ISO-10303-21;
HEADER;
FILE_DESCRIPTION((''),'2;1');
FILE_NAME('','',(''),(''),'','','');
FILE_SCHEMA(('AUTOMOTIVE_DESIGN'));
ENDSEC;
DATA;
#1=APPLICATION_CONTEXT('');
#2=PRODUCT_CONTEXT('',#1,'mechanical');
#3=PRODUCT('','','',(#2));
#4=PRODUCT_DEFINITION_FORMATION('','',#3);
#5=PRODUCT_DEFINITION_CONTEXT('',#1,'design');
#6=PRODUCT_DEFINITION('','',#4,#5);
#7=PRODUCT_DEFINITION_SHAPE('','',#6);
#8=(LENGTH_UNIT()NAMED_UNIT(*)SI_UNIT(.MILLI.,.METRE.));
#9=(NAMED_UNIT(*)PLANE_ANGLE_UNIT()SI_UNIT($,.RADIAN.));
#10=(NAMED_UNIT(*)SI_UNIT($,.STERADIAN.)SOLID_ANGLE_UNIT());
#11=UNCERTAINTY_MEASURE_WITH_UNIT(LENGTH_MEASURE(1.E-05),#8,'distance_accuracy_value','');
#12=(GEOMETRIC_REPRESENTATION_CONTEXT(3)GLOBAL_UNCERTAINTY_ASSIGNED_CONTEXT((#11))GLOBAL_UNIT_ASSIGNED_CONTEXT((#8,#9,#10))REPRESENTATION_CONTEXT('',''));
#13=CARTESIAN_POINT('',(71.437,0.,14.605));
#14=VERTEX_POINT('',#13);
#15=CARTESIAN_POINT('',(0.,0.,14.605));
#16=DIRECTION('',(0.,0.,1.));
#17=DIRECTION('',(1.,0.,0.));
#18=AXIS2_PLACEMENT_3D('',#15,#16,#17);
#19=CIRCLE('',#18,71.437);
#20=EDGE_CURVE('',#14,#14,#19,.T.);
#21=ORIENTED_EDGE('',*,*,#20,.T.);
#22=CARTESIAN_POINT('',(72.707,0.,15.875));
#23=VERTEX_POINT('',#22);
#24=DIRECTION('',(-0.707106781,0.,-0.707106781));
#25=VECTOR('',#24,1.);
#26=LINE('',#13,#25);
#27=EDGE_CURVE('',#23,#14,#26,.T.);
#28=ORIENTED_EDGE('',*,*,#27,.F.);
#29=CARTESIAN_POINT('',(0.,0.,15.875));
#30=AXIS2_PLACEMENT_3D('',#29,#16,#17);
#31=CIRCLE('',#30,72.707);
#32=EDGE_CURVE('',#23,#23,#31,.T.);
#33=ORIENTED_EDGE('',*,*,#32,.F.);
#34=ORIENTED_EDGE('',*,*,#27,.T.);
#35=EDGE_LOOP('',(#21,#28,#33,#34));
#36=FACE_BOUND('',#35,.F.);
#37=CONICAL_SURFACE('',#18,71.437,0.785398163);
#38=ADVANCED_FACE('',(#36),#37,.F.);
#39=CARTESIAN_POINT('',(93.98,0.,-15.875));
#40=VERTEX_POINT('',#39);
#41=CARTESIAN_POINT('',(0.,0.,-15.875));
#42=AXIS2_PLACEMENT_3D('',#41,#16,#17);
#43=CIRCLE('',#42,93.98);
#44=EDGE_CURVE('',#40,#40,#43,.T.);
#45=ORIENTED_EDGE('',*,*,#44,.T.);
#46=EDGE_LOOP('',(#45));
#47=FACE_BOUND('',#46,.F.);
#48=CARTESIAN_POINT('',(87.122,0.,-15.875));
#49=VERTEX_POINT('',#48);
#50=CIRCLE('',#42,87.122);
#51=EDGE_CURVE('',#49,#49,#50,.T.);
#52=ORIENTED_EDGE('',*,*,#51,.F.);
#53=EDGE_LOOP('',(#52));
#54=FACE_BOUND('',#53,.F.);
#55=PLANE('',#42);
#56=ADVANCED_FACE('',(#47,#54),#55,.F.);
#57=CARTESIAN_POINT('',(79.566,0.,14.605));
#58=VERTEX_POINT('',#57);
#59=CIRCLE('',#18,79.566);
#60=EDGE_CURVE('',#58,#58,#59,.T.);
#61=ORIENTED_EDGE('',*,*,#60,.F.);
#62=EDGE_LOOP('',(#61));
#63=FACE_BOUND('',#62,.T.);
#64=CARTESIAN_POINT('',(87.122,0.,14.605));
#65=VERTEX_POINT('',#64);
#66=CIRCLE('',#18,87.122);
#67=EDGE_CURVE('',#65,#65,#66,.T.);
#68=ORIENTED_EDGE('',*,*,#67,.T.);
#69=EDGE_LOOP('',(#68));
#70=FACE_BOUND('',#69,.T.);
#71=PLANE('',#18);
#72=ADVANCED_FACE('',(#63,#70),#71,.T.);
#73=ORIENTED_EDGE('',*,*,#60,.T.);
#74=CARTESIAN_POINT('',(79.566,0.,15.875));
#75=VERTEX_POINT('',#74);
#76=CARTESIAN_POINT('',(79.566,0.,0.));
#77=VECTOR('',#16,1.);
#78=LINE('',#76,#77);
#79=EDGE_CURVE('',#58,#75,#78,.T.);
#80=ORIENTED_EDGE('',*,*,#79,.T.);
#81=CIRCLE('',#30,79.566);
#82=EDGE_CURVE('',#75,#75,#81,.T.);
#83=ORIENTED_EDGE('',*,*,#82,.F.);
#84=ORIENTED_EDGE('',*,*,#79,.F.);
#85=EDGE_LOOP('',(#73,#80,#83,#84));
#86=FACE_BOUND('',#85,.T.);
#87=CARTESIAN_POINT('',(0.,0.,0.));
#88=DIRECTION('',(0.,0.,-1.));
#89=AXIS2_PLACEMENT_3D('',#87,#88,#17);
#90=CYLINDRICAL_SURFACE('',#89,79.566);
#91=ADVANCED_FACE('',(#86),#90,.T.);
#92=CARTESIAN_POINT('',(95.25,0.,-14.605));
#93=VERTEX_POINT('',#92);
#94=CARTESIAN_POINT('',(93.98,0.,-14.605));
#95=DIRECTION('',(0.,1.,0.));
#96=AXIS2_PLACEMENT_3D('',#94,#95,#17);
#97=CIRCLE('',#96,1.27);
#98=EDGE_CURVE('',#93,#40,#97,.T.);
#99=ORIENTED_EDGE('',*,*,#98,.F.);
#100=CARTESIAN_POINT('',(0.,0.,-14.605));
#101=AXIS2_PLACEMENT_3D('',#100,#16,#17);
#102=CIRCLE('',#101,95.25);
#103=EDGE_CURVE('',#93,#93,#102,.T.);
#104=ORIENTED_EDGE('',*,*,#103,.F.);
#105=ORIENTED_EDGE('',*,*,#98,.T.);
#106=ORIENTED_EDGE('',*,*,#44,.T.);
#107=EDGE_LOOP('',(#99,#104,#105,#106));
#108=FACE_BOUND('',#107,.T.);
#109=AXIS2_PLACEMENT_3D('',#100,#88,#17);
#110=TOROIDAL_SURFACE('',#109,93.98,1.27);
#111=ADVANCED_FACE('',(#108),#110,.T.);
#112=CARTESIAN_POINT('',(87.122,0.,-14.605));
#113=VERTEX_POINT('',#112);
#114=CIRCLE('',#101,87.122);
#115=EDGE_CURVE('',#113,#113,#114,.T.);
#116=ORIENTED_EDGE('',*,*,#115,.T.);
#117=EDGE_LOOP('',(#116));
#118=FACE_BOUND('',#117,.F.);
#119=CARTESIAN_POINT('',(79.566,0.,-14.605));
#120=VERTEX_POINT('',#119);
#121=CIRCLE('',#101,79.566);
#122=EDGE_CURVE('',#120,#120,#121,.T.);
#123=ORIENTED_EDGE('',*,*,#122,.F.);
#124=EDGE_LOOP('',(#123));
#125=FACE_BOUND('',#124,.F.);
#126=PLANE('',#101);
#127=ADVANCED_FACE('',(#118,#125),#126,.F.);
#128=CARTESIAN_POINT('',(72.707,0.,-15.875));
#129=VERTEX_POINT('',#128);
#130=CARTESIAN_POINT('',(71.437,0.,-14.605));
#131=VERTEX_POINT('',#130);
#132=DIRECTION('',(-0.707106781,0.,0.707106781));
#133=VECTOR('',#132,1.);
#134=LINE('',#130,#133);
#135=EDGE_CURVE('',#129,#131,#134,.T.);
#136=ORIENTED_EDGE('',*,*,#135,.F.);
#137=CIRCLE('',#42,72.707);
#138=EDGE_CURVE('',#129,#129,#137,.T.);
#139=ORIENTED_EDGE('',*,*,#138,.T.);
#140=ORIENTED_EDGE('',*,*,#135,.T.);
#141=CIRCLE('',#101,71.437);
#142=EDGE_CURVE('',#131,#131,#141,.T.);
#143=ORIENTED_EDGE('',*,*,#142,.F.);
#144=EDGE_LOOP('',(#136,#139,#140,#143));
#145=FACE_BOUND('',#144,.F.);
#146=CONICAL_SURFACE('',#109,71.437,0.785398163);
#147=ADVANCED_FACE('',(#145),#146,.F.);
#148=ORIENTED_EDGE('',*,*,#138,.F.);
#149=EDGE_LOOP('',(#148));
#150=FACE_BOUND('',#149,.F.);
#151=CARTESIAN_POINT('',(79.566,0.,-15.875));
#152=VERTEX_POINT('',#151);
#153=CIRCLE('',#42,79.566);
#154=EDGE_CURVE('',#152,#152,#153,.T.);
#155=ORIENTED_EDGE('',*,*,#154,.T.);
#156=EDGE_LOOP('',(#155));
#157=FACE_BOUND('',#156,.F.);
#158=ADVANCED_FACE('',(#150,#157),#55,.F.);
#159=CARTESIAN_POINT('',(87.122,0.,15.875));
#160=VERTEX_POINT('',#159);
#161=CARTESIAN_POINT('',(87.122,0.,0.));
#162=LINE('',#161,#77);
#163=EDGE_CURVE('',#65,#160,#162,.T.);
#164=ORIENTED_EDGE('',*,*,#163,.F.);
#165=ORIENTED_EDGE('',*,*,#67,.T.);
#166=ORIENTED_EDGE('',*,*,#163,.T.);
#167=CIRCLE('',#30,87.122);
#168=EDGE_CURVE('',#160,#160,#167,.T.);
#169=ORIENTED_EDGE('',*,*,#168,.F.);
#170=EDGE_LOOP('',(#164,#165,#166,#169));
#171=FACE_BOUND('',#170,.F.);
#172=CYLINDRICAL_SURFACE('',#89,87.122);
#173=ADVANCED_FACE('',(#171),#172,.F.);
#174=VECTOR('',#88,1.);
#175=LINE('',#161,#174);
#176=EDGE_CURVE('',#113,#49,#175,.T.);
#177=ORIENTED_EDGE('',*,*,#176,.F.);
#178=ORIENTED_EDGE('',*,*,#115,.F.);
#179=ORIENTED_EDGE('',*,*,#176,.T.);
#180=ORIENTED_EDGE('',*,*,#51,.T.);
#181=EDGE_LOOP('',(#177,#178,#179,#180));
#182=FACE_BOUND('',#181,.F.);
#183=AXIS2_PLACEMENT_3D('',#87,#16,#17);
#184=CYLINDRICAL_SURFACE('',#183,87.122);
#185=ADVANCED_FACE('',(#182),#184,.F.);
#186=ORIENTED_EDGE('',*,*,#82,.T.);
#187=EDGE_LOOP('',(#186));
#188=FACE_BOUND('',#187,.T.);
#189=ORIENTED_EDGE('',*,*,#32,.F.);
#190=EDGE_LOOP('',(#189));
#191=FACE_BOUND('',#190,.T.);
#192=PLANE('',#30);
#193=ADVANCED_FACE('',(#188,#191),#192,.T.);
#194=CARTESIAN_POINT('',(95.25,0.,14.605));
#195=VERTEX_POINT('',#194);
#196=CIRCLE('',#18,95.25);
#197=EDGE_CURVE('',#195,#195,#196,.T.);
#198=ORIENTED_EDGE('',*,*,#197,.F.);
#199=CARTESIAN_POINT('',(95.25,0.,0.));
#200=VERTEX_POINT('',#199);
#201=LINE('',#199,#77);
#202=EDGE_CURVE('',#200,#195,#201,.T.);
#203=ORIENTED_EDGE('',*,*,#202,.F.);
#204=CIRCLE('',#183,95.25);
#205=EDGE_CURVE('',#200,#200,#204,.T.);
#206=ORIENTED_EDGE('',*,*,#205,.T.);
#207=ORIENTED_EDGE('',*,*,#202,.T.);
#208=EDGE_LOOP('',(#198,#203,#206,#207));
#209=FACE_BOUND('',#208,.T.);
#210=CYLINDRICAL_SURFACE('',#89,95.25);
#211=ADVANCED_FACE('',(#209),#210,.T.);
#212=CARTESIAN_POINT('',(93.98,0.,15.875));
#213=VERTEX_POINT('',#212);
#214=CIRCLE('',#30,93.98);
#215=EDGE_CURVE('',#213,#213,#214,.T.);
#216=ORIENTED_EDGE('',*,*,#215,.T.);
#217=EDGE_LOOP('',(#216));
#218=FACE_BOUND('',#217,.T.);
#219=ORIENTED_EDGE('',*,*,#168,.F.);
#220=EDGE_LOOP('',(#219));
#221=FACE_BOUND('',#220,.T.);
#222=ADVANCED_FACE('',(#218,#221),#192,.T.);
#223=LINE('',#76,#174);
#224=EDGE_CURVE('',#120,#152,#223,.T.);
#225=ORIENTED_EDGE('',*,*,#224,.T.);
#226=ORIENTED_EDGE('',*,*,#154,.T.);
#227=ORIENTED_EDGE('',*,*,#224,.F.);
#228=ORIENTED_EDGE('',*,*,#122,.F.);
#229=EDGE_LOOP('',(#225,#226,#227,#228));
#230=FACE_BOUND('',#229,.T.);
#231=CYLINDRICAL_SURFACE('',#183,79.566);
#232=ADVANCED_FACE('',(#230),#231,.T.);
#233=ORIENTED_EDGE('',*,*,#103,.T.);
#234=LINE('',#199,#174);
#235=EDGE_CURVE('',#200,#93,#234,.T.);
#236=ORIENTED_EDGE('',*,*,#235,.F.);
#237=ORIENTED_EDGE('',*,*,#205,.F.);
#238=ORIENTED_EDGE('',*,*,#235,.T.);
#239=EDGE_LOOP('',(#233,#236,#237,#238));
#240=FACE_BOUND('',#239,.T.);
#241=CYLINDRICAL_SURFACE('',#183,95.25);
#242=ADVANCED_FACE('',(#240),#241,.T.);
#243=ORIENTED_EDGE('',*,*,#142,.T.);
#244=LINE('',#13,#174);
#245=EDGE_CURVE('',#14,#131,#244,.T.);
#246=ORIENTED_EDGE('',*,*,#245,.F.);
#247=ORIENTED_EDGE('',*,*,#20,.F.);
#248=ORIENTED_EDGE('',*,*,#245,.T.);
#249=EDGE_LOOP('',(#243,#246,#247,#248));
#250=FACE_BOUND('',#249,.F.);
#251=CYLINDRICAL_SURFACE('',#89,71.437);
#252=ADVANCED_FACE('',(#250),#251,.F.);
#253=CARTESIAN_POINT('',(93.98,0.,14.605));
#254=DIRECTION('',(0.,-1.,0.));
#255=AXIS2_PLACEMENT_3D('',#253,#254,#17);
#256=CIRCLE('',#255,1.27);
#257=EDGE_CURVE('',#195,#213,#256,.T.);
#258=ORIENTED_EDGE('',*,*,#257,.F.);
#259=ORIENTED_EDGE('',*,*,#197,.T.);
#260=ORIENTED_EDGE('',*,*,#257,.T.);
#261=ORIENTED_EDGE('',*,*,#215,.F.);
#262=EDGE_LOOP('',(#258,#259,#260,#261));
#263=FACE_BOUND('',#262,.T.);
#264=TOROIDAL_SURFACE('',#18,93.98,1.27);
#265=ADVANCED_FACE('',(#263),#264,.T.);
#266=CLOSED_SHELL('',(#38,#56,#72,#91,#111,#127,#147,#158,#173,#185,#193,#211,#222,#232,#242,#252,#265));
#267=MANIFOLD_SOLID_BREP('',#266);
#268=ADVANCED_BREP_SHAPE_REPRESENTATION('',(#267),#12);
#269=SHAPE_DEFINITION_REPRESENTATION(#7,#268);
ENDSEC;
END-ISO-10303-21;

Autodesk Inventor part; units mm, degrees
ref_plane "YZ Plane" through (0, 0, 0) normal (1, 0, 0) x (0, 1, 0)
ref_plane "XZ Plane" through (0, 0, 0) normal (0, 1, 0) x (-1, 0, 0)
ref_plane "XY Plane" through (0, 0, 0) normal (0, 0, 1) x (1, 0, 0)
sketch "Sketch1" plane through (0, 0, 0) normal (0, 0, 1) x (1, 0, 0)
  circle A0 centre (0, 0) radius 7.1437
  circle A1 centre (0, 0) radius 9.525
  circle A2 centre (0, 0) radius 7.9566
  circle A3 centre (0, 0) radius 8.7122
  dimension "d0" = 14.2875
  dimension "d1" = 19.05
  dimension "d2" = 0.8128
  dimension "d3" = 0.8128
extrude "Extrusion1" add sketch "Sketch1" along normal mid plane 3.175
fillet "Fillet1" radius 0.127 2 edges at (-9.525, 0, 1.5875) (-9.525, 0, -1.5875)
chamfer "Chamfer1" distance 0.127 angle 45 2 edges at (-7.1437, 0, 1.5875) (-7.1437, 0, -1.5875)
sketch "Sketch2" plane through (0, 0, 0) normal (0, 0, 1) x (1, 0, 0)
  circle A0 centre (0, 0) radius 8.7122
  circle A1 centre (0, 0) radius 7.9566
extrude "Extrusion2" add sketch "Sketch2" along normal mid plane 2.921
scale "Scale1" factors (10, 10, 10) then translate (0, 0, 0) bodies 1
properties part number "front hub bearing"
